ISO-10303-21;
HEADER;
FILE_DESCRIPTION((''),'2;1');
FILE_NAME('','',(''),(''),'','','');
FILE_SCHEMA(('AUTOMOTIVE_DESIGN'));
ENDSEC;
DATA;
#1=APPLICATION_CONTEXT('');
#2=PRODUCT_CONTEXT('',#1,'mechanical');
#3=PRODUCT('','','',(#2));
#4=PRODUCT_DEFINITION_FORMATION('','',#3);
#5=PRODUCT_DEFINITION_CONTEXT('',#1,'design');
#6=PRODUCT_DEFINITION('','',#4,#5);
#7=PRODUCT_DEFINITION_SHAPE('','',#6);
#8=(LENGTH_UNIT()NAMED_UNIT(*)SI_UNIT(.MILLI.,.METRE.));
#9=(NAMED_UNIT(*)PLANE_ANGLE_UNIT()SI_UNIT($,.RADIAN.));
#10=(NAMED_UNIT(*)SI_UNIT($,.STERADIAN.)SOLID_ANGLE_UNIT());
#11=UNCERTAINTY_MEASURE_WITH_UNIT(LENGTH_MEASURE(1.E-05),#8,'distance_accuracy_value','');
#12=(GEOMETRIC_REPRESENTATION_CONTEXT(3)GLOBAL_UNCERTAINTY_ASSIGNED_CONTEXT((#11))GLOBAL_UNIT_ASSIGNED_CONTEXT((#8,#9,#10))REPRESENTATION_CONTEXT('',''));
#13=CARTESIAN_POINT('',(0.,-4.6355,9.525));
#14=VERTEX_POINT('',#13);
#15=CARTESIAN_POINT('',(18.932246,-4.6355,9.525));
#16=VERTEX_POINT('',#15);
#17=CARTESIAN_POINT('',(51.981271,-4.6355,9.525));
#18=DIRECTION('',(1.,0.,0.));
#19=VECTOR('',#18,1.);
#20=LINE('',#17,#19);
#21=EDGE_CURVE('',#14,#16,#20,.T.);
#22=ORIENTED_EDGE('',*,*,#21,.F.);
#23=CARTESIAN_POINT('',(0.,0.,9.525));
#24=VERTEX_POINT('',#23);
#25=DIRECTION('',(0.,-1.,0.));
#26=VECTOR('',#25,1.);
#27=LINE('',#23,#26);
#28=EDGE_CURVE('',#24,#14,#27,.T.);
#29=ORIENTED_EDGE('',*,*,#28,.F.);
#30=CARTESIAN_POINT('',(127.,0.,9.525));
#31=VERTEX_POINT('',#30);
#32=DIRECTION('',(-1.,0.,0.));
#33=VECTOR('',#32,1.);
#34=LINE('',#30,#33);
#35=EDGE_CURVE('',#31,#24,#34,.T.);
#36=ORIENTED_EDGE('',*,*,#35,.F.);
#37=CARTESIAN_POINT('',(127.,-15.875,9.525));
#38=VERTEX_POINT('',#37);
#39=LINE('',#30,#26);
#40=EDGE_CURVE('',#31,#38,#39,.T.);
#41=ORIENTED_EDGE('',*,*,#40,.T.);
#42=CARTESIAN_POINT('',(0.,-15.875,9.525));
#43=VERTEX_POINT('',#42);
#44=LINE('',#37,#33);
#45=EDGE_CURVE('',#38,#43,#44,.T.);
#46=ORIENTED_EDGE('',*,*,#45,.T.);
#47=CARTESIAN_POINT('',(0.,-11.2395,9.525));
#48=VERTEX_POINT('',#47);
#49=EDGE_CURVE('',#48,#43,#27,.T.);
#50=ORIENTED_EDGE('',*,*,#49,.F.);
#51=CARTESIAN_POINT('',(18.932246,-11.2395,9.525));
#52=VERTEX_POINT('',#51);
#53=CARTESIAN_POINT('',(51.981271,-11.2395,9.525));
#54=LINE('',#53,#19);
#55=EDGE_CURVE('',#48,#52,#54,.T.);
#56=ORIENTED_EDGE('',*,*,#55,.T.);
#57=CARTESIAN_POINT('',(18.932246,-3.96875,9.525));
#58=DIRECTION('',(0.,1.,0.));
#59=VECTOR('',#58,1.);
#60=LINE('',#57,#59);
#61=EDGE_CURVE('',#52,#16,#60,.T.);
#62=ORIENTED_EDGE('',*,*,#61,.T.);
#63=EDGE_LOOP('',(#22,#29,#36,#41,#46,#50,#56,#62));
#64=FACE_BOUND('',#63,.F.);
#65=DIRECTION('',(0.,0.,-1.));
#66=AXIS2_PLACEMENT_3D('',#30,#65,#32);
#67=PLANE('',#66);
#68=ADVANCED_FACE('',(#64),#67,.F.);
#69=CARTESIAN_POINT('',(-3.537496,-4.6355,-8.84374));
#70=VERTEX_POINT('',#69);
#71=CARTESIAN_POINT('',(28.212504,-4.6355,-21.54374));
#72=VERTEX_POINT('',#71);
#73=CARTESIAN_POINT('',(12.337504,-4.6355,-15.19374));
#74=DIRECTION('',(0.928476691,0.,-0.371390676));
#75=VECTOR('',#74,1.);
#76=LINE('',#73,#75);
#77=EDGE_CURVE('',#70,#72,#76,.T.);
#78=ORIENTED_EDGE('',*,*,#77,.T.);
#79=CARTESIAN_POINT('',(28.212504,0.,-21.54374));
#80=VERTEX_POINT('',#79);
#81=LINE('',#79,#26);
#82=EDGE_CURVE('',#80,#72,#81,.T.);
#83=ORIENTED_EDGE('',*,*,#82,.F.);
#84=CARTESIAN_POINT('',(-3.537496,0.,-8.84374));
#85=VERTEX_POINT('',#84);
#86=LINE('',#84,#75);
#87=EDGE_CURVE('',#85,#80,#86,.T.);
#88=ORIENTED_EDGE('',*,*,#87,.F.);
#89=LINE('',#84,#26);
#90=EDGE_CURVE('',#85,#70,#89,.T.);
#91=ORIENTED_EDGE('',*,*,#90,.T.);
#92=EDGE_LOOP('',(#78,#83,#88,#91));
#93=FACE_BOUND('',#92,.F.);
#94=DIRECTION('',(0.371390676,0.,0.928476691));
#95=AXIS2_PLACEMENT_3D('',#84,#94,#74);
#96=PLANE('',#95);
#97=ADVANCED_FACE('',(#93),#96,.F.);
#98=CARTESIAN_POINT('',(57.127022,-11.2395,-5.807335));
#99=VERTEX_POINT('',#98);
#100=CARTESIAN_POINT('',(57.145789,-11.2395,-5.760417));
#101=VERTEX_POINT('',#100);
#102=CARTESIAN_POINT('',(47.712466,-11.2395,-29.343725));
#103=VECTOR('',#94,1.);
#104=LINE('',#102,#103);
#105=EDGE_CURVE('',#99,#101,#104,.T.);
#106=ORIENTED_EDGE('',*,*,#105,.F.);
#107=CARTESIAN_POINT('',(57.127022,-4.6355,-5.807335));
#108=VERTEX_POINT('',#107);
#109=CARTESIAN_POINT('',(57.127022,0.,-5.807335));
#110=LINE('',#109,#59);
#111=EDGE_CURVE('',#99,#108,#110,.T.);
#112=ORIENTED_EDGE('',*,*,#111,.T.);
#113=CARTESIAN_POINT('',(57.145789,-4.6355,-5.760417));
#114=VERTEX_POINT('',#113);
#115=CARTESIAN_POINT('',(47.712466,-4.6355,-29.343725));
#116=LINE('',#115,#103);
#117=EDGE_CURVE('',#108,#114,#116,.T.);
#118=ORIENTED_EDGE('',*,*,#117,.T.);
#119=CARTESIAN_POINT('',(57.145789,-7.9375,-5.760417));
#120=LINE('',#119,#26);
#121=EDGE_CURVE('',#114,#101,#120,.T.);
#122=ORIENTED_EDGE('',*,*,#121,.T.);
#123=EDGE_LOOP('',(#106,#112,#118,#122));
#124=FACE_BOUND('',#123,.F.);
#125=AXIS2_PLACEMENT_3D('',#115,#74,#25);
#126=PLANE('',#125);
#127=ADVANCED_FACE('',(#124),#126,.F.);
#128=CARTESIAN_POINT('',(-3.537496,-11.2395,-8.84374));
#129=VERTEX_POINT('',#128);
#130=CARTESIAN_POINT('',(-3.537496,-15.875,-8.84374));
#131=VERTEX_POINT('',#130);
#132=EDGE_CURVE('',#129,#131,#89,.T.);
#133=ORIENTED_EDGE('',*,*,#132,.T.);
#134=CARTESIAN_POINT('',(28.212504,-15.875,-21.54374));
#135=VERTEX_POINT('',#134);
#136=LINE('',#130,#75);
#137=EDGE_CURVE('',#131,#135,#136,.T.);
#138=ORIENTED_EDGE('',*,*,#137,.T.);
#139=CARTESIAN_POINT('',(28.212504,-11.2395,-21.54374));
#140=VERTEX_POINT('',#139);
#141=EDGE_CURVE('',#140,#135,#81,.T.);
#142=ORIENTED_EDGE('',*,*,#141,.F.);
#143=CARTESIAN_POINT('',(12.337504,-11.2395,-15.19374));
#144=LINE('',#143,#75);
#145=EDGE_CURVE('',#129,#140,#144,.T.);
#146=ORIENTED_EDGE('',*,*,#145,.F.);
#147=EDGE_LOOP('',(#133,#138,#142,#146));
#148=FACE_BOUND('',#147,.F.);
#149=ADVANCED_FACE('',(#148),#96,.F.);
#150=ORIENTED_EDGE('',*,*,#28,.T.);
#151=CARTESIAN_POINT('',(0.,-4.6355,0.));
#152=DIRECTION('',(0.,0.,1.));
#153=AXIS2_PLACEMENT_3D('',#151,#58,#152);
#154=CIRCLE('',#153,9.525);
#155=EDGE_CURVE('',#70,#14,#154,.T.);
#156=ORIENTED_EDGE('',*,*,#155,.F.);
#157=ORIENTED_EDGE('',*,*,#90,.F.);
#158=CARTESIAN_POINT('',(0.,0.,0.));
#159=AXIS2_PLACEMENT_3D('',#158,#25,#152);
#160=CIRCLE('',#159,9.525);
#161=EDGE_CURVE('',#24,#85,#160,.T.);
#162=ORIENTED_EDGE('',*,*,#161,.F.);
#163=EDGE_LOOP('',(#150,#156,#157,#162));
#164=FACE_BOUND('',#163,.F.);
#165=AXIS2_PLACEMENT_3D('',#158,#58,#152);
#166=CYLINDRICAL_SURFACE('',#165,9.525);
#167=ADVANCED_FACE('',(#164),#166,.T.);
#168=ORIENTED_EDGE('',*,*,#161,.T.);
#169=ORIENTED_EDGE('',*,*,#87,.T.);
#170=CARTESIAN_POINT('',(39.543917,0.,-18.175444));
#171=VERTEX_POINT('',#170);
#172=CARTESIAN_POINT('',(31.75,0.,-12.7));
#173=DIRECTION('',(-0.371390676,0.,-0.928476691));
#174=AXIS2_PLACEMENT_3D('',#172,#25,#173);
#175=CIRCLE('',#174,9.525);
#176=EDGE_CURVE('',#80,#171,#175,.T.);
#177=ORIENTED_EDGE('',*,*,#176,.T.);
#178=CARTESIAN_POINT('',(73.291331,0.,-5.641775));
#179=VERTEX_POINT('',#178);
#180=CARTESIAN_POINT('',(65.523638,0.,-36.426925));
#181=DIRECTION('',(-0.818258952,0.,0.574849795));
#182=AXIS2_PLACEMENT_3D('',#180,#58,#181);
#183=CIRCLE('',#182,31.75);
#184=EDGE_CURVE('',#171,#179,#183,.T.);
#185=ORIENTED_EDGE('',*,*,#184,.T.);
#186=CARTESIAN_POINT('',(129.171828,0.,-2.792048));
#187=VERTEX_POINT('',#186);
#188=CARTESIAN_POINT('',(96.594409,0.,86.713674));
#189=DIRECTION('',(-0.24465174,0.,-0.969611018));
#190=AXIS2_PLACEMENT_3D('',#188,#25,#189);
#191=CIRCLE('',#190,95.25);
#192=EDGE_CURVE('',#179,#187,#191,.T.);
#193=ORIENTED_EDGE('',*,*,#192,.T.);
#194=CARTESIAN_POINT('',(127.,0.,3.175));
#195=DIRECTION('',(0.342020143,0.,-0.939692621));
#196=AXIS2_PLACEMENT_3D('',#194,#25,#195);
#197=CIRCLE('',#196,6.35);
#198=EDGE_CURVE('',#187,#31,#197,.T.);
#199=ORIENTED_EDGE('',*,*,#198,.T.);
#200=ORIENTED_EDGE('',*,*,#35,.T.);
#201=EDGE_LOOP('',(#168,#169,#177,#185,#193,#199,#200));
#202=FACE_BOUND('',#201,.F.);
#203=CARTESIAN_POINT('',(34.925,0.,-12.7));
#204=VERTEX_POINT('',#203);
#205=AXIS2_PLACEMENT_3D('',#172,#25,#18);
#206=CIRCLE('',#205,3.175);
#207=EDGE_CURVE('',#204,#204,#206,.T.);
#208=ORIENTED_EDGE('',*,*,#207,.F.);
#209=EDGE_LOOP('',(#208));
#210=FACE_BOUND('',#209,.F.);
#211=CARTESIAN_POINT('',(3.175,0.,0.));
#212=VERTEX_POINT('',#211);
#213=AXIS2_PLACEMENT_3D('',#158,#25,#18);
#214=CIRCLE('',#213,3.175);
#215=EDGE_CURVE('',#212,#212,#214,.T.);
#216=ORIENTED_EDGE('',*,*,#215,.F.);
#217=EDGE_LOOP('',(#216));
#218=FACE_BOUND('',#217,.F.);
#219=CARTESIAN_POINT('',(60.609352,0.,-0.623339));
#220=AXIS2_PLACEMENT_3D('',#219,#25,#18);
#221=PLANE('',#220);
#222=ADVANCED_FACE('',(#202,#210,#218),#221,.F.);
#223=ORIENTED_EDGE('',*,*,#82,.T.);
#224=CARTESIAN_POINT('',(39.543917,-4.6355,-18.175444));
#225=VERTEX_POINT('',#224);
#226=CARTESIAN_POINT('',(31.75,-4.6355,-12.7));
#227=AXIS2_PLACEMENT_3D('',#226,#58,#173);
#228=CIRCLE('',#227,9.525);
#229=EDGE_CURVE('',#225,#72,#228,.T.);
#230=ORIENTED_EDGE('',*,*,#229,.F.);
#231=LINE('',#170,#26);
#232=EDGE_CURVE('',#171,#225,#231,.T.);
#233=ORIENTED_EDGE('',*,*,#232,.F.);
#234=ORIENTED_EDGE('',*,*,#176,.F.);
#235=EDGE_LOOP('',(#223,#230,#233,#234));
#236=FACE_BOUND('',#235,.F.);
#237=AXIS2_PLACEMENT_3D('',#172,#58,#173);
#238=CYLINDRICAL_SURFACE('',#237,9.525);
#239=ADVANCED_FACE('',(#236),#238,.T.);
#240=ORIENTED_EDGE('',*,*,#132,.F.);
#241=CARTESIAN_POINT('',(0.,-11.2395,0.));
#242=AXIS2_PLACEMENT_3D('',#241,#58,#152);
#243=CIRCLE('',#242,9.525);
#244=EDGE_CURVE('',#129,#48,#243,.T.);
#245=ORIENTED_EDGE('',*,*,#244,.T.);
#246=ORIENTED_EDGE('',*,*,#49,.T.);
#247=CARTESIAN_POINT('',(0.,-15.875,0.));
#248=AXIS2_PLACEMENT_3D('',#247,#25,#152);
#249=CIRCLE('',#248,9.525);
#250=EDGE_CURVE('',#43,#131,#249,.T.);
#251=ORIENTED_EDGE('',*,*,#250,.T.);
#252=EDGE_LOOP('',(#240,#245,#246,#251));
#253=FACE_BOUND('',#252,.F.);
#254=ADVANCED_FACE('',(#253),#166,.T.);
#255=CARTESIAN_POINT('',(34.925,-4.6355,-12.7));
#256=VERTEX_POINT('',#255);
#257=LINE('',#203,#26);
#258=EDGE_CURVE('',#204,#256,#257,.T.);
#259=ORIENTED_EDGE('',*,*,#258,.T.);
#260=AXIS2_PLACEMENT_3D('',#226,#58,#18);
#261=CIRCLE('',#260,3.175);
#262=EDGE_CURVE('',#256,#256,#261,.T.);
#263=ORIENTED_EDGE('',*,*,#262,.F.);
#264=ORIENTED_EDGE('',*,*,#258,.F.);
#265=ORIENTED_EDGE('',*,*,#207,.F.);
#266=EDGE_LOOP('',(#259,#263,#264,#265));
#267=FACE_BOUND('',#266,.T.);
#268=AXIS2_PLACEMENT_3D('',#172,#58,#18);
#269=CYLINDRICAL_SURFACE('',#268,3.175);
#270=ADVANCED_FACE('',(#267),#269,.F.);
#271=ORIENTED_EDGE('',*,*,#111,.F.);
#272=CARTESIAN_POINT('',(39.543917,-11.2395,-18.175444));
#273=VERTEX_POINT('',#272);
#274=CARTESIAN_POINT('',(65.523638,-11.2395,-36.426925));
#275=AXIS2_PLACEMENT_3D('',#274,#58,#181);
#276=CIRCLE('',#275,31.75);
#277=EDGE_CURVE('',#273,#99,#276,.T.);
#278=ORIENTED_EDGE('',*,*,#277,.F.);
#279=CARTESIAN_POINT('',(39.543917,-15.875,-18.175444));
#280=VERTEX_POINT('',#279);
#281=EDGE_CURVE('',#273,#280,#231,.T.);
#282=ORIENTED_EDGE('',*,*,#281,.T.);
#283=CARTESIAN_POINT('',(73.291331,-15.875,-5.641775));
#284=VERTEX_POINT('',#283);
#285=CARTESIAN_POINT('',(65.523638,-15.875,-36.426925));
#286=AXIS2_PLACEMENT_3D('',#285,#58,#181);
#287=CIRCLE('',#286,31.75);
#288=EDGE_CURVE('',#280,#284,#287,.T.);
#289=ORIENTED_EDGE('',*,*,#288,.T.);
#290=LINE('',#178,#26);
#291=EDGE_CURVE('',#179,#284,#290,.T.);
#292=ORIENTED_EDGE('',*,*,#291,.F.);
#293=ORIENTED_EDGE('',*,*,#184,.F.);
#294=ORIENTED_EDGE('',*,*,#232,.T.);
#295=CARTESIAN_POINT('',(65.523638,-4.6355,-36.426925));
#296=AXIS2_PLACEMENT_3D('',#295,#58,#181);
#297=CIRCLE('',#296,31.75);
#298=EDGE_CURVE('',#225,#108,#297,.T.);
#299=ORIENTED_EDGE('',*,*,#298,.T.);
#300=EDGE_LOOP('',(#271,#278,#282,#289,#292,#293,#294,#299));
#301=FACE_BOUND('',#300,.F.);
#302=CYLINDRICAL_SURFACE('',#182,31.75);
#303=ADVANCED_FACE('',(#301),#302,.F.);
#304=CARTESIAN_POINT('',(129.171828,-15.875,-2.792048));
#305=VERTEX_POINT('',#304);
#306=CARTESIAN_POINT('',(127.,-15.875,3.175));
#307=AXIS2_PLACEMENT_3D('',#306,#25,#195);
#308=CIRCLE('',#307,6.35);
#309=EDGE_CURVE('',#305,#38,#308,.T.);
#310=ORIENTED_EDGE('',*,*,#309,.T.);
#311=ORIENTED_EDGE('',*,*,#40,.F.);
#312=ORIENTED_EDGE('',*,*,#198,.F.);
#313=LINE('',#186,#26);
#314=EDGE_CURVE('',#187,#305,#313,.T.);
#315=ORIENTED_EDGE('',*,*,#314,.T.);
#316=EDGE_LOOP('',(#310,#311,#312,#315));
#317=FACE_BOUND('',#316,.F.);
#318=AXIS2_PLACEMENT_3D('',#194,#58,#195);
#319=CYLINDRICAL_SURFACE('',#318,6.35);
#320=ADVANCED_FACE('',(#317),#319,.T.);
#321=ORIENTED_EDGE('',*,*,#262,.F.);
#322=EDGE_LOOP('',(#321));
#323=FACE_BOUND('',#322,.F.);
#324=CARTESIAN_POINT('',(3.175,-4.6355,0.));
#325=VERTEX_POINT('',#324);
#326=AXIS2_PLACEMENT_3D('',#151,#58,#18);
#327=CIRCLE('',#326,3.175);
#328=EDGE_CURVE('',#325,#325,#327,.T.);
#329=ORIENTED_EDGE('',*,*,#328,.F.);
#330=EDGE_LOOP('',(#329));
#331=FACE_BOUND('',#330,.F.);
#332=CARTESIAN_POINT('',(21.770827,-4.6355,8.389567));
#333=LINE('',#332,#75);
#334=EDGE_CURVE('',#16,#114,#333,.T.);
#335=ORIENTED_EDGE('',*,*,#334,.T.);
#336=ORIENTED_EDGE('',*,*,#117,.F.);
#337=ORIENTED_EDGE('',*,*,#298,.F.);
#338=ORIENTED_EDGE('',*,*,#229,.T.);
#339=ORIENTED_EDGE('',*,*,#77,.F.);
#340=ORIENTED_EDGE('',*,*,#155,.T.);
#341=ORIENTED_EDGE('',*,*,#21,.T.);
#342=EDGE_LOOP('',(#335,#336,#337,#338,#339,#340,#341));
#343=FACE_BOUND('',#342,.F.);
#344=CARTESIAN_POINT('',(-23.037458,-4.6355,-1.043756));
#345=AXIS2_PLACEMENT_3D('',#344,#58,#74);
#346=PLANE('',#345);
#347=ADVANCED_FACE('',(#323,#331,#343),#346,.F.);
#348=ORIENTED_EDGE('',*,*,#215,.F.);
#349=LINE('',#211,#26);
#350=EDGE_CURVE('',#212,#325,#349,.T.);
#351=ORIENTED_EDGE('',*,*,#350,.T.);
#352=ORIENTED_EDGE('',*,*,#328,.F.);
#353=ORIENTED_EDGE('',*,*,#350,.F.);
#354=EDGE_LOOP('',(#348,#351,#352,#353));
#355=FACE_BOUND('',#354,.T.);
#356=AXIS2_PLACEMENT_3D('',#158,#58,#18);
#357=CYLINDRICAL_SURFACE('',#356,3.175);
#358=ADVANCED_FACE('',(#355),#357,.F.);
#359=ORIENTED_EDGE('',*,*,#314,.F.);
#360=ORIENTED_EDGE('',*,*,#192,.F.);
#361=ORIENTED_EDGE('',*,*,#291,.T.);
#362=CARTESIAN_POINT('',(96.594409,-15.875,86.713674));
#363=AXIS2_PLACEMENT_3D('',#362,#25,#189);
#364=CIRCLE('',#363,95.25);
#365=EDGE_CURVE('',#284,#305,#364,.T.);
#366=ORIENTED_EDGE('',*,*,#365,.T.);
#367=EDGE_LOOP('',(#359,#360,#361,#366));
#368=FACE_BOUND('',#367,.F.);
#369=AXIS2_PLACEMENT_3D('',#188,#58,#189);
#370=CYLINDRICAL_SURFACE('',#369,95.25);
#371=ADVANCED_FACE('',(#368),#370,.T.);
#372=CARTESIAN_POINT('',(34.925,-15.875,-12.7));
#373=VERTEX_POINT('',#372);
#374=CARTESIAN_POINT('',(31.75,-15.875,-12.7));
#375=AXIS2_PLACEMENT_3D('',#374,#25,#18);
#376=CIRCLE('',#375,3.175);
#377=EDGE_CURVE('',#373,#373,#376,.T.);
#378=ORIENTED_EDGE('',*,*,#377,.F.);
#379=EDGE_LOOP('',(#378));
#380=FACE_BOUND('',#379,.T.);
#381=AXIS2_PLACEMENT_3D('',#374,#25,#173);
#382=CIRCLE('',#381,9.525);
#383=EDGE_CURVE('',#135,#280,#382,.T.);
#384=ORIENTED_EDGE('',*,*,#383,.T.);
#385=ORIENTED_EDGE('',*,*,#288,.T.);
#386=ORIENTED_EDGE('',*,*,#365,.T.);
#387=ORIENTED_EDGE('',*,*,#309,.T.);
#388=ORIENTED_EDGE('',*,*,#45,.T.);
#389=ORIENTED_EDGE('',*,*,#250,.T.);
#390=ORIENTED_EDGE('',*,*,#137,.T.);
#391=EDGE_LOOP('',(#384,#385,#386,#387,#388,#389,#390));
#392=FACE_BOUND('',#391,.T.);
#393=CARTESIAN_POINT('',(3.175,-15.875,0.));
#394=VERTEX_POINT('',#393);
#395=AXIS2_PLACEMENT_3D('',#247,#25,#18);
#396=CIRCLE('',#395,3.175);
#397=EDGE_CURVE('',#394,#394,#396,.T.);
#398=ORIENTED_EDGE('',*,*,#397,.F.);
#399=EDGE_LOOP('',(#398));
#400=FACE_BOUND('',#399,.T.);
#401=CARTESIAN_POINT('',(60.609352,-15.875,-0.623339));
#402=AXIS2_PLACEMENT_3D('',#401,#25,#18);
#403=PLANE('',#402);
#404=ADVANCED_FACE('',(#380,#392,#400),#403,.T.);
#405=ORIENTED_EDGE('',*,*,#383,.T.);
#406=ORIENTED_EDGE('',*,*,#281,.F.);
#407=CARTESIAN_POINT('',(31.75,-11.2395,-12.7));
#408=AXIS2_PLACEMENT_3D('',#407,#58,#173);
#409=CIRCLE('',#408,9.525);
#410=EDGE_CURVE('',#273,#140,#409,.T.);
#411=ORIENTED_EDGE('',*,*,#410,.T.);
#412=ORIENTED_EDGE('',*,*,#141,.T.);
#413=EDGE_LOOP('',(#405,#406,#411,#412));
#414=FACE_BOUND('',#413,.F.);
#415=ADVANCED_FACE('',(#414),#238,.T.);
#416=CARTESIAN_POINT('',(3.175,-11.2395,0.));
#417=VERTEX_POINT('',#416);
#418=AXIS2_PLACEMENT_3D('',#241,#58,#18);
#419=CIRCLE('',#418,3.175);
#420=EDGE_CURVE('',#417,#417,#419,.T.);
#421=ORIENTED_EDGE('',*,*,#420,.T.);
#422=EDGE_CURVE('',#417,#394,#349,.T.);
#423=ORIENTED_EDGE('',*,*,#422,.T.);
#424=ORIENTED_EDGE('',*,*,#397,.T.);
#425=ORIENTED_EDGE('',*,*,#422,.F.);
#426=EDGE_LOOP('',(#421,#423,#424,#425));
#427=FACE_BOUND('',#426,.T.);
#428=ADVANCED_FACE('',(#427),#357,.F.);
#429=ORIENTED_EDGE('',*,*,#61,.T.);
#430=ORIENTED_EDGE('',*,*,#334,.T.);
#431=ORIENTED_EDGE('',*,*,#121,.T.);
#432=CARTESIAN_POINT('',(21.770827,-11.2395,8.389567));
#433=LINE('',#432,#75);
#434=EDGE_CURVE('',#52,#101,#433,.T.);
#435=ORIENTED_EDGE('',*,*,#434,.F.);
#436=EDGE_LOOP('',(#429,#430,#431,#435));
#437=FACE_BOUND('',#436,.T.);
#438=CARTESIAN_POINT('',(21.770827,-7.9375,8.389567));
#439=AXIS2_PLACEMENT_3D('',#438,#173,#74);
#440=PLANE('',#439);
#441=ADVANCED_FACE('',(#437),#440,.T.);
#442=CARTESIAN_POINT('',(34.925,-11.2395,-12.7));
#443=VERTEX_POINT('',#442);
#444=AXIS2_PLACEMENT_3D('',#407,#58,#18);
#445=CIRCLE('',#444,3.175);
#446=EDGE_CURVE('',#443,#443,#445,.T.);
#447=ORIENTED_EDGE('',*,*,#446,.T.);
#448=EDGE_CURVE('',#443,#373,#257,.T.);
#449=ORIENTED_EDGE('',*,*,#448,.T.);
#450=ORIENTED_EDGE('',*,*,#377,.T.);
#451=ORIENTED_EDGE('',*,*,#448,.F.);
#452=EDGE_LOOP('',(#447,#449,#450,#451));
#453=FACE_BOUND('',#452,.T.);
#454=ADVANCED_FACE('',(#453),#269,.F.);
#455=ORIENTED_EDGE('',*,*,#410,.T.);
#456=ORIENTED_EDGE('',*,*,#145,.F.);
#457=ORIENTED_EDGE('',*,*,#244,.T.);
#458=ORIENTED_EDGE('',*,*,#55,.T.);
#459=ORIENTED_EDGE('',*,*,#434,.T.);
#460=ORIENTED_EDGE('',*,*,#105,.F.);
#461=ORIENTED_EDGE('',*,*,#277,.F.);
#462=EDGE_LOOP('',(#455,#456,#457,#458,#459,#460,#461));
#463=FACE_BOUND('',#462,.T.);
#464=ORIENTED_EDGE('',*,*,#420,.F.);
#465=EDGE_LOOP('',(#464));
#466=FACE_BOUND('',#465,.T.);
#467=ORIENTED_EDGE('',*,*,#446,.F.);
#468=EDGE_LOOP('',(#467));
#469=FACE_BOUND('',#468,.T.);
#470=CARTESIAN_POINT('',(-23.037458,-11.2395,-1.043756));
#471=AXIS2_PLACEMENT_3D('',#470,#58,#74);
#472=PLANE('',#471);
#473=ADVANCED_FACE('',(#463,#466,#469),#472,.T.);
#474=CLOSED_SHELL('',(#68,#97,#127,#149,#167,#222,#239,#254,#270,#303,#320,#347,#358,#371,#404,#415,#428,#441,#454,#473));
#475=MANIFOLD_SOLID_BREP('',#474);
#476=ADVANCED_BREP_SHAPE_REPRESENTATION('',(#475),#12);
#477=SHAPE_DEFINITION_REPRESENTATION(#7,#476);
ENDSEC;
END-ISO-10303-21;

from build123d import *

# Parameters (mm, degrees)
F0_R     = 3.175
F1_DEPTH = 15.875
F2_W     = 76.2
F2_H     = 6.604
F3_DEPTH = 25.4


# Not quite as in the source:
# - a length typed as a fraction of an inch, garbled in the dataset ("3 / 203.2 mm" for 3/8 in), is restored


with BuildPart() as f1:
    # F0 (on Front) → F1 (new body)
    with BuildSketch(Plane.XZ):
        with BuildLine():
            Line((127, 9.525), (0, 9.525))
            ThreePointArc((0, 9.525), (-9.3531345836, 1.801249139), (-3.5374961923, -8.8437404807))
            Line((-3.5374961923, -8.8437404807), (28.2125038077, -21.5437404807))
            ThreePointArc((28.2125038077, -21.5437404807), (34.4639700258, -21.8301693138), (39.543916522, -18.1754442969))
            ThreePointArc((39.543916522, -18.1754442969), (54.4695569537, -6.6633605399), (73.291331011, -5.641775468))
            ThreePointArc((73.291331011, -5.641775468), (101.4455517982, -8.4127099235), (129.1718279101, -2.792048142))
            ThreePointArc((129.1718279101, -2.792048142), (133.2535292316, 4.2776659282), (127, 9.525))
        make_face()
        with Locations((31.75, -12.7)):
            Circle(F0_R, mode=Mode.SUBTRACT)
        Circle(F0_R, mode=Mode.SUBTRACT)
    extrude(amount=F1_DEPTH)

    # F2 (on face) → F3 (cut)
    with BuildSketch(Plane(origin=(-3.5374961923, 0, -8.8437404807), x_dir=(0.9284766909, 0, -0.3713906764), z_dir=(-0.3713906764, 0, -0.9284766909))):
        with Locations((17.0978982627, 7.9375)):
            Rectangle(F2_W, F2_H)
    extrude(amount=-F3_DEPTH, mode=Mode.SUBTRACT)


solid = f1.part
